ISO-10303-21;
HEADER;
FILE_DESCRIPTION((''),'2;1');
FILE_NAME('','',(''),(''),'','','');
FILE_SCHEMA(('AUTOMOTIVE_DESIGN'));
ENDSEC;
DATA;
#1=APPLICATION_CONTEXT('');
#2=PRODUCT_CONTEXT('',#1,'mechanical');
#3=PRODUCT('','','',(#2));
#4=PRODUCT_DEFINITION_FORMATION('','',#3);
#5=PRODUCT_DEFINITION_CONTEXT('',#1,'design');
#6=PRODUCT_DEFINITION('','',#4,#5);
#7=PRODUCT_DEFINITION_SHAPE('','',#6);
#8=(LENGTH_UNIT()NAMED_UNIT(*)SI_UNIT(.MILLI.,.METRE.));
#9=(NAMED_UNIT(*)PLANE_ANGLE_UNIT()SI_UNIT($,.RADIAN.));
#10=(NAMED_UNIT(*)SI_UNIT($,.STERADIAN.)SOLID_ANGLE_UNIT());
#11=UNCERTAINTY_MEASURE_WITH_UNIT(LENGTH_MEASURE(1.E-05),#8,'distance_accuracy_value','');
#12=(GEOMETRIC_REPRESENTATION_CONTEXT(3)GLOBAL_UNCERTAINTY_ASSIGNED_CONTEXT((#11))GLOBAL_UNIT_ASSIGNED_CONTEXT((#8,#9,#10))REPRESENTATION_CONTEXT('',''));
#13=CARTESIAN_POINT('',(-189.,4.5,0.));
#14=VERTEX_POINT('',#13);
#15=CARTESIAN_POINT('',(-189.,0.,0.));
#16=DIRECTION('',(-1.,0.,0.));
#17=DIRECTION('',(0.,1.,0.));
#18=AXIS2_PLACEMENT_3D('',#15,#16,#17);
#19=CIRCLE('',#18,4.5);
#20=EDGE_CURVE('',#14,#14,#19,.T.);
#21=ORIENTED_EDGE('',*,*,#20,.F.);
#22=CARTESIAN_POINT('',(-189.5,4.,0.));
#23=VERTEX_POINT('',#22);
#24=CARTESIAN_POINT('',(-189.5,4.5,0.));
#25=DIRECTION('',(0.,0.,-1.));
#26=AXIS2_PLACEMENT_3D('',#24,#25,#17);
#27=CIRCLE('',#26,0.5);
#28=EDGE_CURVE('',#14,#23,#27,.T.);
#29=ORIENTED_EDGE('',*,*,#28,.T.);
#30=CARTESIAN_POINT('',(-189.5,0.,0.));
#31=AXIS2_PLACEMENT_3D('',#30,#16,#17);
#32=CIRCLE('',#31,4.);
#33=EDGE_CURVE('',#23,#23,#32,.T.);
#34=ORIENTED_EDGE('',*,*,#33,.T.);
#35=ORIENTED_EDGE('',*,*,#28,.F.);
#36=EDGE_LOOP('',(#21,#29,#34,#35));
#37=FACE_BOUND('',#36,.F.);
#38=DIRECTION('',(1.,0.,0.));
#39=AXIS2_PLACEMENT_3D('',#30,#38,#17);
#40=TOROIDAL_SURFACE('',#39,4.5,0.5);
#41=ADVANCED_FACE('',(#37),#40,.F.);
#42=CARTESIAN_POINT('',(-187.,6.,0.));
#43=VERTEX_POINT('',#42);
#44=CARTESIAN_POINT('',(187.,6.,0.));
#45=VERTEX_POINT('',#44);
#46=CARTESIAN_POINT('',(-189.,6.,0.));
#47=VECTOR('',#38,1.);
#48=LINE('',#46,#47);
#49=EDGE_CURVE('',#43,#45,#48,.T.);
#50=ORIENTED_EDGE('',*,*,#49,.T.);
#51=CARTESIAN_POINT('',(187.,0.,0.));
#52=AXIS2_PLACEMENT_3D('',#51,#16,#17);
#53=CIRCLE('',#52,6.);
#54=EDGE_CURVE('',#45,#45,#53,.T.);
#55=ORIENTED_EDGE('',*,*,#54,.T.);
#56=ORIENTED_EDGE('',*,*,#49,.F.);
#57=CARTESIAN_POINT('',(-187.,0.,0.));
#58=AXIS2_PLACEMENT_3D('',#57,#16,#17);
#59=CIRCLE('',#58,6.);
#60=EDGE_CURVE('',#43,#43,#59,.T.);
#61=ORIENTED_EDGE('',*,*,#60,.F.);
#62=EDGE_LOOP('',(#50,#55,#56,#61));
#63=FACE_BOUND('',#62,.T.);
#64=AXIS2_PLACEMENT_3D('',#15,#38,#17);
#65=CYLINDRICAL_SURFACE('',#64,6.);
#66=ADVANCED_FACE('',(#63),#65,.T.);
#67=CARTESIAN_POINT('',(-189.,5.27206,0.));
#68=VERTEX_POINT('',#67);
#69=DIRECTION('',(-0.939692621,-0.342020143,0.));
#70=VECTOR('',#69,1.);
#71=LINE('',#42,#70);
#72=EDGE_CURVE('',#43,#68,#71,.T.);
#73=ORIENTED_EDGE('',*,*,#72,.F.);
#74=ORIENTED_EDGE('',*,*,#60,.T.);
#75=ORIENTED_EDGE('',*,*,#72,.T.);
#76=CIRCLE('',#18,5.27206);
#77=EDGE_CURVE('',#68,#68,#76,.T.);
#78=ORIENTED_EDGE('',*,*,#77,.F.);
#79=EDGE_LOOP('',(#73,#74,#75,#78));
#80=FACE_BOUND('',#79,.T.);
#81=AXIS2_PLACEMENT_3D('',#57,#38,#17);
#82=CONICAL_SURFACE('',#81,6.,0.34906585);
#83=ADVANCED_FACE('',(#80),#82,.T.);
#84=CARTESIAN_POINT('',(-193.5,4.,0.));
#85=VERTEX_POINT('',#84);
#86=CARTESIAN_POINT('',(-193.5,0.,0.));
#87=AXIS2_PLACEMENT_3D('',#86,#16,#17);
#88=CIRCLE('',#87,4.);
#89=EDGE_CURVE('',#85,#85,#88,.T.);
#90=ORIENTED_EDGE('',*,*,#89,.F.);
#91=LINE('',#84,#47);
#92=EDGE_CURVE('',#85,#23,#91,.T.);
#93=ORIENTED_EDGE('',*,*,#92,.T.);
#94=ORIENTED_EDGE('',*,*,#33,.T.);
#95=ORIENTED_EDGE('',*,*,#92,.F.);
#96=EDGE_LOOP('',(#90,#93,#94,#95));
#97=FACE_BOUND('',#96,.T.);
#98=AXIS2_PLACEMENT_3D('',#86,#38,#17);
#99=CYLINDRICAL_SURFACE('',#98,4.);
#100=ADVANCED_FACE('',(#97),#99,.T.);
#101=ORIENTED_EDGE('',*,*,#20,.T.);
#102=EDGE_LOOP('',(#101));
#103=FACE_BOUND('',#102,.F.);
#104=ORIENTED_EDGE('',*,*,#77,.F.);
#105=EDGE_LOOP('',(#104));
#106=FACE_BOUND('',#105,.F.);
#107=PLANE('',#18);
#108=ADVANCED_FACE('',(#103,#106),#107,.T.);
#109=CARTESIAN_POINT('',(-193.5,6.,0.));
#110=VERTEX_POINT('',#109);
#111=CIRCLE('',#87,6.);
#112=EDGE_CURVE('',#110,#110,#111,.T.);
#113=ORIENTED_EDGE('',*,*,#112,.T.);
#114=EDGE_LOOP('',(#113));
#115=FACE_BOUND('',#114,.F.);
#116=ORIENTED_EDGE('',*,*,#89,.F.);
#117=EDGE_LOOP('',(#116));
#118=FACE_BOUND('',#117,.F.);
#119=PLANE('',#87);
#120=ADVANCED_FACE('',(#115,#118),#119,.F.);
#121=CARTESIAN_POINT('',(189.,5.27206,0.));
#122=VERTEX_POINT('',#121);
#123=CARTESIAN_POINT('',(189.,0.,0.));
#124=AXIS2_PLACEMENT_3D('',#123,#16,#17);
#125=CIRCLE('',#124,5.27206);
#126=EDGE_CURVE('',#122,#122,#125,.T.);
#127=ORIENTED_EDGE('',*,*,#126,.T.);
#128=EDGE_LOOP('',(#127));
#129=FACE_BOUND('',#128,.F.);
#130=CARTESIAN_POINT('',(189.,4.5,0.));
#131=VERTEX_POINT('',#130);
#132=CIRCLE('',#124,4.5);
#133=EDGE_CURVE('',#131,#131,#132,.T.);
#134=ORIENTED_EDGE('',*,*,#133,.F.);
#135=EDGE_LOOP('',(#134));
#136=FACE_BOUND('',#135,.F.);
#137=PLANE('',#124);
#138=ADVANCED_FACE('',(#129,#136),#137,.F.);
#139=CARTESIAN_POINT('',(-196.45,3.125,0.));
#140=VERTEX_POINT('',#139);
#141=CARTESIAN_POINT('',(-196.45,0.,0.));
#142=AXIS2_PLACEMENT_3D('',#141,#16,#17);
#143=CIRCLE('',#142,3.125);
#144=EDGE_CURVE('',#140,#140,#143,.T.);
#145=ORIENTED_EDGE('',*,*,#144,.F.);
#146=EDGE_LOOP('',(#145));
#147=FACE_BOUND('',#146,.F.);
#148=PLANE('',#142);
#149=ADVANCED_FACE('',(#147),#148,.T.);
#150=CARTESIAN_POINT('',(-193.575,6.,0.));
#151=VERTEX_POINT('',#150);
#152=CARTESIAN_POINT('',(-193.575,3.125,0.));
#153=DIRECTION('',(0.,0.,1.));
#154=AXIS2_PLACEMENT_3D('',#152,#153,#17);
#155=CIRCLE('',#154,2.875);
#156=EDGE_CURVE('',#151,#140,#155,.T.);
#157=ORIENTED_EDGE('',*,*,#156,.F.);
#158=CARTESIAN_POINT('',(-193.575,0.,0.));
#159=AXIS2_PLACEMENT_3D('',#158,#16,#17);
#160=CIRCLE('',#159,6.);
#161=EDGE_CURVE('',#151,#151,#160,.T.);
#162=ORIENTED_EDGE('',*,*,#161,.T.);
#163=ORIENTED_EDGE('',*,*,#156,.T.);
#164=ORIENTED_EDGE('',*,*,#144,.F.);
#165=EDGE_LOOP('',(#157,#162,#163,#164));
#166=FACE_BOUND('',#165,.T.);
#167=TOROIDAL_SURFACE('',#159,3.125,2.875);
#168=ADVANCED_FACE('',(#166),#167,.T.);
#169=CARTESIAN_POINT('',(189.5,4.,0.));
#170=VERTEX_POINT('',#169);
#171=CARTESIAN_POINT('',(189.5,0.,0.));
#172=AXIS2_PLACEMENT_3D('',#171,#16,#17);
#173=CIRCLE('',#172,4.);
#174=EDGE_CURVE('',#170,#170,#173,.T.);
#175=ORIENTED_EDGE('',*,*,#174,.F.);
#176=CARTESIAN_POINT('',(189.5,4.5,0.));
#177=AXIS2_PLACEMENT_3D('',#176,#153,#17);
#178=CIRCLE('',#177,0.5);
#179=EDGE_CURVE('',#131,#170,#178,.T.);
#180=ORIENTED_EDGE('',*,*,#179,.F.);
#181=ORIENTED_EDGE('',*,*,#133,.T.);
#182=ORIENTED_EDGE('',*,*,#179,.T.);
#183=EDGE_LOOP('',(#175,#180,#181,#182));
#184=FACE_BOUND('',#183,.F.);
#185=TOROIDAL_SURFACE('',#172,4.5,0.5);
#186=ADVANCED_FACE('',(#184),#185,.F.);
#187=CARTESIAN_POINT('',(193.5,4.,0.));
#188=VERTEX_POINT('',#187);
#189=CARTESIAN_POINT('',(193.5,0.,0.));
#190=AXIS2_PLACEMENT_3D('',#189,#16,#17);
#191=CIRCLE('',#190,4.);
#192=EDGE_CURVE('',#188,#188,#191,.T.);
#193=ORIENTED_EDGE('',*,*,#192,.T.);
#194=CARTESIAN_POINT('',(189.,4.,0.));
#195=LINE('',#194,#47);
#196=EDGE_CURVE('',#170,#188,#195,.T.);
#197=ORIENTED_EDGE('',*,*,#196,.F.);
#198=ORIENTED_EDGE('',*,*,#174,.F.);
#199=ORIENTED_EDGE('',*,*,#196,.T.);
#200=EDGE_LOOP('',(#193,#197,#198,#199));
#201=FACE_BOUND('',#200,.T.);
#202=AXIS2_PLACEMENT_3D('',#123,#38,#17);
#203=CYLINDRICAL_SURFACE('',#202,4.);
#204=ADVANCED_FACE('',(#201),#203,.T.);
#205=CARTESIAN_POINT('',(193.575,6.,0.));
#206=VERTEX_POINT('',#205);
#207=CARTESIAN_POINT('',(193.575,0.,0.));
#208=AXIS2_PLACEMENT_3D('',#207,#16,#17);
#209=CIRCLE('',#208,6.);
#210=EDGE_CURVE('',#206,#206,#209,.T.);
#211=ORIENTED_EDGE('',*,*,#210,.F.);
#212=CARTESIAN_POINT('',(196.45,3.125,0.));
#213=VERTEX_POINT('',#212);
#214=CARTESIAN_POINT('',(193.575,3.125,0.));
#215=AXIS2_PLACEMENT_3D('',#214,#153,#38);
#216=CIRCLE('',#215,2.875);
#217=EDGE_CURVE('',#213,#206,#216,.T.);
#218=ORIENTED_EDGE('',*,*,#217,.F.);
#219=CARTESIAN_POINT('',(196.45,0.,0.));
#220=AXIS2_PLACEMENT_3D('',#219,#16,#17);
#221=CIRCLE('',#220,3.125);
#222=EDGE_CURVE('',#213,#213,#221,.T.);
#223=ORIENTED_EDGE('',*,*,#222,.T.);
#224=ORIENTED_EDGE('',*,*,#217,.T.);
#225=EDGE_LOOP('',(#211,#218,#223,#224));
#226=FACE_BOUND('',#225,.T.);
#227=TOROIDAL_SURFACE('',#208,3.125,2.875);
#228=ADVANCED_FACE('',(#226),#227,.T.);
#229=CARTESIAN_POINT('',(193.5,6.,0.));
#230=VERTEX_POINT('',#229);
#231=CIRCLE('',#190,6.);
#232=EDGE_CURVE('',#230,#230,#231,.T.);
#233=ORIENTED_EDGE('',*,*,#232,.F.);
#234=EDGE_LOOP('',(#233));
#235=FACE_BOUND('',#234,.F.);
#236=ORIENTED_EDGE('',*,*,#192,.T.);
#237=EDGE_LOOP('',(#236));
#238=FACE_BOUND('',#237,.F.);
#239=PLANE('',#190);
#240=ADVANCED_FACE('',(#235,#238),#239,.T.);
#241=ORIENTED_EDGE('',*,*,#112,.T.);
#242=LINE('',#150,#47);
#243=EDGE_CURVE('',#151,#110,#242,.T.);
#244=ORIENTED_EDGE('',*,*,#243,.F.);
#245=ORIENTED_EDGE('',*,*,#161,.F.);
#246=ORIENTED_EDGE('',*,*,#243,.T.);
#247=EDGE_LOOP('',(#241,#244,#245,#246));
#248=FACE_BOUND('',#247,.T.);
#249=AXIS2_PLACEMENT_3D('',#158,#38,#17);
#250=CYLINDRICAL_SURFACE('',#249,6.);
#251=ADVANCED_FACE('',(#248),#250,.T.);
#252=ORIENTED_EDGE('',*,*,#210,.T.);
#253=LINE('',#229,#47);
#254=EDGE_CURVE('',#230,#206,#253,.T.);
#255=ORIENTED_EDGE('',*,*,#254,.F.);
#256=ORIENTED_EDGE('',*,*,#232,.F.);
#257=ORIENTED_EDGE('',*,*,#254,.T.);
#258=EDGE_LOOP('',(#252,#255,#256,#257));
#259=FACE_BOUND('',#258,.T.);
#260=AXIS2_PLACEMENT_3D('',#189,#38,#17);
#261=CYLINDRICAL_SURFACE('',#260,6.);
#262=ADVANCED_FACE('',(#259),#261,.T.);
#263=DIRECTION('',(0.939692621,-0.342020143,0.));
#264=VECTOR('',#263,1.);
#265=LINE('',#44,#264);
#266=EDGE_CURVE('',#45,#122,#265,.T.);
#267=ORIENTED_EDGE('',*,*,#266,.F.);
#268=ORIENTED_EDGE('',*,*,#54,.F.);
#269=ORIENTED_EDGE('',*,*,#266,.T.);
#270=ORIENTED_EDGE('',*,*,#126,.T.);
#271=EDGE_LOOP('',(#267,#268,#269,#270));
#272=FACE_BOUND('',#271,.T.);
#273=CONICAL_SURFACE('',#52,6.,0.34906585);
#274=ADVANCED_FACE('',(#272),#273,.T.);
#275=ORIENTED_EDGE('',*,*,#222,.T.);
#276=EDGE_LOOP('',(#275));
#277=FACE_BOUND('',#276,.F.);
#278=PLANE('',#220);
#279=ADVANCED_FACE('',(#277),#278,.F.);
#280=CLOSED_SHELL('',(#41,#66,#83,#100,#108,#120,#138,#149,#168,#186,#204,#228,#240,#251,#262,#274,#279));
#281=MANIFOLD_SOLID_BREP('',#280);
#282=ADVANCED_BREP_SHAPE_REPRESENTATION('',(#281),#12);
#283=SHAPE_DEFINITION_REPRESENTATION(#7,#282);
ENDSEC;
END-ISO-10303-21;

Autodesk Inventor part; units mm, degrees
ref_plane "YZ Plane" through (0, 0, 0) normal (1, 0, 0) x (0, 1, 0)
ref_plane "XZ Plane" through (0, 0, 0) normal (0, 1, 0) x (-1, 0, 0)
sketch "Sketch1" plane through (0, 0, 0) normal (0, 0, 1) x (1, 0, 0)
  line L0 (196.45, 0) -> (-196.45, 0)
  line L1 (-196.45, 0) -> (-196.45, 3.125)
  line L2 (-193.575, 6) -> (-193.5, 6)
  line L3 (-193.5, 6) -> (-193.5, 4)
  line L4 (-193.5, 4) -> (-189, 4)
  line L5 (-189, 4) -> (-189, 6)
  line L6 (-189, 6) -> (189, 6)
  line L7 (189, 6) -> (189, 4)
  line L8 (189, 4) -> (193.5, 4)
  line L9 (193.5, 4) -> (193.5, 6)
  line L10 (193.5, 6) -> (193.575, 6)
  line L11 (196.45, 3.125) -> (196.45, 0)
  arc A0 (-193.575, 6) -> (-196.45, 3.125) centre (-193.575, 3.125) ccw
  arc A1 (196.45, 3.125) -> (193.575, 6) centre (193.575, 3.125) ccw
  point P0 (0, 0)
  point P1 (0, 0)
  dimension "d2" = 12
  dimension "d4" = 8
  dimension "d5" = 12
  dimension "d7" = 8
  dimension "d8" = 12
  dimension "d15" = 2.875
  dimension "d21" = 2.95
  dimension "d22" = 4.5
  dimension "d23" = 2.95
  dimension "d24" = 4.5
  dimension "d29" = 387
revolve "Revolution1" add sketch "Sketch1" angle 360 about axis through (196.45, 0, 0) along (-1, 0, 0)
chamfer "Chamfer1" distance 2 angle 20 1 edges at (-189, -6, 0) measured on face at (-63, 5.9223, 0.9625)
fillet "Fillet1" radius 0.5 2 edges at (189, -4, 0) (-189, -4, 0)
chamfer "Chamfer2" distance 2 angle 20 1 edges at (189, -6, 0) measured on face at (-61.6667, 5.9805, 0.4828)
ref_plane "Work Plane1" through (-81.95, 0, 0) normal (-1, 0, 0) x (0, 0, 1)
split_face "Split1"
equation "\"d2\" = d5"
equation "\"d7\" = d4"
equation "\"d8\" = d5"
equation "\"d24\" = d22"
properties part number "311-03" material "Steel"
